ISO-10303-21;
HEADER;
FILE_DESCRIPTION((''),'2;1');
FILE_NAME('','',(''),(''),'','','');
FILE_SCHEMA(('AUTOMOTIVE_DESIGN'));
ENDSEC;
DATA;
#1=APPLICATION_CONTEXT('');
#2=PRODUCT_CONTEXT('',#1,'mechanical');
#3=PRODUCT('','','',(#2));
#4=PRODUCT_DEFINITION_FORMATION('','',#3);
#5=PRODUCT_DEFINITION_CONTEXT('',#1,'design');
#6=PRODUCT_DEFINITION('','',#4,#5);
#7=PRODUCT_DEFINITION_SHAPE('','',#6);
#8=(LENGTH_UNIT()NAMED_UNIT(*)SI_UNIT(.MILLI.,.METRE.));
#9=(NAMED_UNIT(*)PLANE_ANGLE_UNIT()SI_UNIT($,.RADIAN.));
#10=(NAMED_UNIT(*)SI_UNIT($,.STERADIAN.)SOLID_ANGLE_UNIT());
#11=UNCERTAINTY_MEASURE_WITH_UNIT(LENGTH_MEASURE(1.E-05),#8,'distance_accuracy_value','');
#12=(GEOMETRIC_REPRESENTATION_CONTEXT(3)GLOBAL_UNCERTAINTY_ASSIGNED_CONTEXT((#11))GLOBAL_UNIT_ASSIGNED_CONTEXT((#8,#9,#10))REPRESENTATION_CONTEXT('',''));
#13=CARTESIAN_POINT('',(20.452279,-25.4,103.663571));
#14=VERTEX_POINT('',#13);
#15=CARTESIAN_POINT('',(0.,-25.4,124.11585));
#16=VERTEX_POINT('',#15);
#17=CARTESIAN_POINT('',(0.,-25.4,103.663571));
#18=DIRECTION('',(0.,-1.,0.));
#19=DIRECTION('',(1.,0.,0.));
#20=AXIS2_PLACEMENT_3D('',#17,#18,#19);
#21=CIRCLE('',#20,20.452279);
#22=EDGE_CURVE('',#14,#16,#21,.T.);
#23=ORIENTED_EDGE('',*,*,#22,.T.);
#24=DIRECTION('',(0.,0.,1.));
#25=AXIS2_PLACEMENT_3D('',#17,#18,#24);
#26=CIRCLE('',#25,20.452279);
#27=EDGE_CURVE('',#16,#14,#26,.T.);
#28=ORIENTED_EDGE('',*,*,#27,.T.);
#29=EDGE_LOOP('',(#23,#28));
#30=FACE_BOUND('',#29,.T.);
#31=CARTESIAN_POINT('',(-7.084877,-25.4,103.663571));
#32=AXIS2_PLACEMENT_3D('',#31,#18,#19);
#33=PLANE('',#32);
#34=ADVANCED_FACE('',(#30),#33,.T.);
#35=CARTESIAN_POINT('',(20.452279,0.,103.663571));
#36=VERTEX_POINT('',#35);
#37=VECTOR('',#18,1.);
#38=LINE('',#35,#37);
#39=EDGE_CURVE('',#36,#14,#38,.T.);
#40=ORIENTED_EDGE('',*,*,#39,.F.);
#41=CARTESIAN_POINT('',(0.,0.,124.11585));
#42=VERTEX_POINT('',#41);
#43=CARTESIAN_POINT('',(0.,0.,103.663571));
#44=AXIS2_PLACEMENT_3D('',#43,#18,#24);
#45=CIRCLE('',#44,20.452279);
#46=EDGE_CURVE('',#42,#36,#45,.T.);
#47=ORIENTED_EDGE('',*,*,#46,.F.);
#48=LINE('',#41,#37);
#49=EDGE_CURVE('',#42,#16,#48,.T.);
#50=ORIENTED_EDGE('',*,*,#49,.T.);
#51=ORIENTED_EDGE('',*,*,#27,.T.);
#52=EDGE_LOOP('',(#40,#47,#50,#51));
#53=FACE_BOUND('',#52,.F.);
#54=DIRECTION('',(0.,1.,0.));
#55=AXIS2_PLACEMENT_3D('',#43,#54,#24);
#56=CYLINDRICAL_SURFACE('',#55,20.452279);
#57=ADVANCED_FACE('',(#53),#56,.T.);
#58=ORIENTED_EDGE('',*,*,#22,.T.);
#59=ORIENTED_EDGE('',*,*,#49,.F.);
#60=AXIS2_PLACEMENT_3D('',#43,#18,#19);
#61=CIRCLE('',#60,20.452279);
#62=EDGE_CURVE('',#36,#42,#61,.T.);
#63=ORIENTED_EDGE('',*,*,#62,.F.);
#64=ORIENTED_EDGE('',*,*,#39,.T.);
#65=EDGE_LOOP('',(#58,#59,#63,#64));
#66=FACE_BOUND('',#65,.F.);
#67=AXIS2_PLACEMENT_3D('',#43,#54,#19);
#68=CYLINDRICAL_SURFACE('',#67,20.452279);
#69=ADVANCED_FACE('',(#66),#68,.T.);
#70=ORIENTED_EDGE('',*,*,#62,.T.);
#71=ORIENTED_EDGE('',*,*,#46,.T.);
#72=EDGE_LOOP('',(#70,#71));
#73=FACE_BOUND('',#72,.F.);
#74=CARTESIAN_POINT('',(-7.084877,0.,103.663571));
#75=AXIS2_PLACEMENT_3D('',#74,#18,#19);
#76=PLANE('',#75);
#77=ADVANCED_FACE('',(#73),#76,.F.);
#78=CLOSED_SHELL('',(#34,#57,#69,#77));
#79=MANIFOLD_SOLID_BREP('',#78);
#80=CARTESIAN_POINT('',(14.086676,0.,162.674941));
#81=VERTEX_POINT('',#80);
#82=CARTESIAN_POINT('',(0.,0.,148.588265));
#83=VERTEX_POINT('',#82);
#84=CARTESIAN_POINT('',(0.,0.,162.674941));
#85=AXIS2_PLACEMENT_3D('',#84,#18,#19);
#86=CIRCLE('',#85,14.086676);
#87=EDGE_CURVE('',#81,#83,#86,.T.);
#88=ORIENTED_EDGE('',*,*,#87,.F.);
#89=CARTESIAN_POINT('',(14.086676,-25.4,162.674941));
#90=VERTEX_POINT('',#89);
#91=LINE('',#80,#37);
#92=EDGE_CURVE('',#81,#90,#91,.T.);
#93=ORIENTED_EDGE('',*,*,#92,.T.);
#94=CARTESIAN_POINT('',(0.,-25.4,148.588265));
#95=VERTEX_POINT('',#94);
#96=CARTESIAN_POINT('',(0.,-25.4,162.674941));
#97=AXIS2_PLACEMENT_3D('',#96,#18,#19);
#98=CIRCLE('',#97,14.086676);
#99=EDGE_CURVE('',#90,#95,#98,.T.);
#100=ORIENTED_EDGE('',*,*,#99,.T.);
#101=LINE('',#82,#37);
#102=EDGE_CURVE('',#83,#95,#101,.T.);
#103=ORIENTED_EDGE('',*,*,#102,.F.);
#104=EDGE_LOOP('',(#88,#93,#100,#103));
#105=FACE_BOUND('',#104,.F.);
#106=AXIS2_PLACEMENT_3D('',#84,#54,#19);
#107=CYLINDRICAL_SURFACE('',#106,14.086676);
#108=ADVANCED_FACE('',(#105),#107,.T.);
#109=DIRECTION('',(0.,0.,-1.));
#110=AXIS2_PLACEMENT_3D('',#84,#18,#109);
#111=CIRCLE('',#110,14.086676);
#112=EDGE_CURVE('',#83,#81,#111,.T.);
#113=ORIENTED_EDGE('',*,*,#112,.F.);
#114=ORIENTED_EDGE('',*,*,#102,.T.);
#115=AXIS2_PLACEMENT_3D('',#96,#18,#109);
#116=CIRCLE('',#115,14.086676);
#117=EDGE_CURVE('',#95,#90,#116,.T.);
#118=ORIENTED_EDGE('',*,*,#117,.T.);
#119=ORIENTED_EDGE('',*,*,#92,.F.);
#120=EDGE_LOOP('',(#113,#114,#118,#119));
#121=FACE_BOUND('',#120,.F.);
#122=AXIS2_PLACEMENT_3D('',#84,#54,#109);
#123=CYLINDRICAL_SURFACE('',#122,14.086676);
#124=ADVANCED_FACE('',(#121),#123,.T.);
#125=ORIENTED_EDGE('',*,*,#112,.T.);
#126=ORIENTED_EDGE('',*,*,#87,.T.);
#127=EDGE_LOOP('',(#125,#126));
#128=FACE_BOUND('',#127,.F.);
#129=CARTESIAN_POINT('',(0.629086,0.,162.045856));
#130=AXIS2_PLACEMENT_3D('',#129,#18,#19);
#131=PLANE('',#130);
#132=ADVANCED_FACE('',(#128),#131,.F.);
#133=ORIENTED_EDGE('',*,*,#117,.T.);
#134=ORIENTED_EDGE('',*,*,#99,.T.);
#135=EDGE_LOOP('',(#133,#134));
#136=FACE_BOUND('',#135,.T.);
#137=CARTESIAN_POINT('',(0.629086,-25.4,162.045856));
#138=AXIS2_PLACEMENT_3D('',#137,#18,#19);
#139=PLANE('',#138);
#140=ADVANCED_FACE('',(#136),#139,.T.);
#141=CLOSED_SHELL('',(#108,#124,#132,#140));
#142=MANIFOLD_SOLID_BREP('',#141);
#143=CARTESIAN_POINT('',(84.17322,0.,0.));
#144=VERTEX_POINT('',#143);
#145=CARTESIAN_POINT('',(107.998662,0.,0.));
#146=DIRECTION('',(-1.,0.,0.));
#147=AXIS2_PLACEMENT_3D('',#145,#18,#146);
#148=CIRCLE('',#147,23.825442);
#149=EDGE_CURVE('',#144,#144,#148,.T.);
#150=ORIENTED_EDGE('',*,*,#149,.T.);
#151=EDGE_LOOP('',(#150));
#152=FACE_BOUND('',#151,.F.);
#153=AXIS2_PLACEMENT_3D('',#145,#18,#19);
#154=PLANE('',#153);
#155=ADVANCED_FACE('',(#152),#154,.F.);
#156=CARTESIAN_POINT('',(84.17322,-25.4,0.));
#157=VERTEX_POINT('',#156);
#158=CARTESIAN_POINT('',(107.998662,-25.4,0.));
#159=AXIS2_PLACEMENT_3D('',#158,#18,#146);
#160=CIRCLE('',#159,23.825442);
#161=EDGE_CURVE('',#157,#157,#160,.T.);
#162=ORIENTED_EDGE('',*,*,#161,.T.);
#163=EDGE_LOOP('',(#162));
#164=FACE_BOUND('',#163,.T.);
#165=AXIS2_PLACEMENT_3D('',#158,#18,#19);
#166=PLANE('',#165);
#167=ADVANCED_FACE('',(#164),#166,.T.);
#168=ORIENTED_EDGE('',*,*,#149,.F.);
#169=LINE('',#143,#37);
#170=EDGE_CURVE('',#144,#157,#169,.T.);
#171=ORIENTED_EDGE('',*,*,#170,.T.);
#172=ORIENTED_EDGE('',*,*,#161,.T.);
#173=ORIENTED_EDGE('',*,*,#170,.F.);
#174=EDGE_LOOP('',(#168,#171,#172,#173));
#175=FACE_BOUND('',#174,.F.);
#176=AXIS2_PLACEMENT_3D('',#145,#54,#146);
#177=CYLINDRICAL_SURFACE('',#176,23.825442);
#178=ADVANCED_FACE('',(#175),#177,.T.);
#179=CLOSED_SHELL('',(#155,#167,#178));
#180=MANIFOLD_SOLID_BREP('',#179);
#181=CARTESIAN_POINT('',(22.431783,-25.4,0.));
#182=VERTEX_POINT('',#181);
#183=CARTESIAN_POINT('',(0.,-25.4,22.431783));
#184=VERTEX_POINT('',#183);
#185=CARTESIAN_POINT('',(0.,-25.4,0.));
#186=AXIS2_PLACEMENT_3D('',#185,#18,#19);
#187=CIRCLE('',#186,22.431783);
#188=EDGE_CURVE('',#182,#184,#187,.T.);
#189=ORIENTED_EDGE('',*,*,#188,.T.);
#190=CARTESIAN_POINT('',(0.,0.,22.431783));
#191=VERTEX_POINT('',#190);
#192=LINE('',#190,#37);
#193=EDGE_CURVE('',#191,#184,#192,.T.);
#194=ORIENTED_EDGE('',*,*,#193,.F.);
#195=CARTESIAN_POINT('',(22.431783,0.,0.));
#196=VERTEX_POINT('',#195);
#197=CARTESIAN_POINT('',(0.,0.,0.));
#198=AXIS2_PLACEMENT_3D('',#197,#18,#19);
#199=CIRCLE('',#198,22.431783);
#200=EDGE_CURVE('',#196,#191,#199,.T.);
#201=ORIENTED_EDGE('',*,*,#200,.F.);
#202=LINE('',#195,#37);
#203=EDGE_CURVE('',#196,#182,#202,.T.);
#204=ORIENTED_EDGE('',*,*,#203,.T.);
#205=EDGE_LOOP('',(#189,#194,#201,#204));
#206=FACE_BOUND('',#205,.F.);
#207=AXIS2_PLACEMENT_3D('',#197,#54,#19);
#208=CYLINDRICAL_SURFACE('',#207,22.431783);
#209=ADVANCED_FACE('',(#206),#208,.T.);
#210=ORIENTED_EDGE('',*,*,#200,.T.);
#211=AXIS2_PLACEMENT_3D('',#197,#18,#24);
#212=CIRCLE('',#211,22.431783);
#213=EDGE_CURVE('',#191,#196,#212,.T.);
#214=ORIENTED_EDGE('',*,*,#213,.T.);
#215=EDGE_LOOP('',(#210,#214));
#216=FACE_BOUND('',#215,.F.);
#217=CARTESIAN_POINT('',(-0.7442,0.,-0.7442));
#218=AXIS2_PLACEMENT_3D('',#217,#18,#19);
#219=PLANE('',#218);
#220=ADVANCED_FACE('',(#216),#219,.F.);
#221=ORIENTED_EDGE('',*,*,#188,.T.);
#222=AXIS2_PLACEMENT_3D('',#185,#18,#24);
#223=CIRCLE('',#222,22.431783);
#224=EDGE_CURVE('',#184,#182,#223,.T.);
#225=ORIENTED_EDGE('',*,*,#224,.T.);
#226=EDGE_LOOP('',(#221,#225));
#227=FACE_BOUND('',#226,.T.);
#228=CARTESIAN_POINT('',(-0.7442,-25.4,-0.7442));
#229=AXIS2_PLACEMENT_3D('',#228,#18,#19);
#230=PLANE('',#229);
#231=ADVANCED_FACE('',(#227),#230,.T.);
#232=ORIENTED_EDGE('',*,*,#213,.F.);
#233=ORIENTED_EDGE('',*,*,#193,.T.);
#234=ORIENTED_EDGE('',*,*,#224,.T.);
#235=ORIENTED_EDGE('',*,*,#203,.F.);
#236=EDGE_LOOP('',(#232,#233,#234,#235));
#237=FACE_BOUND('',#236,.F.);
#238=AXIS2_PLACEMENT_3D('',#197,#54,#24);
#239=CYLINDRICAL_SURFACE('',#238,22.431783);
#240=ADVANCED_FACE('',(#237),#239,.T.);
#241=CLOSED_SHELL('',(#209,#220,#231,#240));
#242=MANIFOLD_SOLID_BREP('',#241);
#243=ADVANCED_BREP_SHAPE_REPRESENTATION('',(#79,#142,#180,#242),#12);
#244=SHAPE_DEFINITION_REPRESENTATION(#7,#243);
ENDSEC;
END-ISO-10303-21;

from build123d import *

# Parameters (mm, degrees)
F3_DEPTH = 25.4


# Not quite as in the source:
# - the program builds the solid bodies; features that only make, move or delete a surface that nothing else refers to are left out


with BuildPart() as f3:
    # F0 (on Front) → F3 (new body)
    with BuildSketch(Plane.XZ):
        with BuildLine():
            Line((22.4317827104, 0), (0, 0))
            Line((0, 0), (0, 22.4317827104))
            ThreePointArc((0, 22.4317827104), (-15.8616656686, -15.8616656686), (22.4317827104, 0))
        make_face()
        with BuildLine():
            Line((0, 22.4317827104), (0, 0))
            Line((0, 0), (22.4317827104, 0))
            ThreePointArc((22.4317827104, 0), (15.8616656686, 15.8616656686), (0, 22.4317827104))
        make_face()
    extrude(amount=F3_DEPTH)


with BuildPart() as f3b:
    # F0 (on Front) → F3, piece 2 (new body)
    with BuildSketch(Plane.XZ):
        with BuildLine():
            ThreePointArc((14.0866758828, 162.6749411225), (-9.9607840411, 172.6357251636), (0, 148.5882652397))
            ThreePointArc((0, 148.5882652397), (9.9607840411, 152.7141570814), (14.0866758828, 162.6749411225))
        make_face()
    extrude(amount=F3_DEPTH)


with BuildPart() as f3c:
    # F0 (on Front) → F3, piece 3 (new body)
    with BuildSketch(Plane.XZ):
        with BuildLine():
            ThreePointArc((0, 124.1158500545), (-20.4522788755, 103.6635711789), (0, 83.2112923034))
            Line((0, 83.2112923034), (0, 124.1158500545))
        make_face()
        with BuildLine():
            Line((0, 124.1158500545), (0, 83.2112923034))
            ThreePointArc((0, 83.2112923034), (14.4619450836, 89.2016260953), (20.4522788755, 103.6635711789))
            ThreePointArc((20.4522788755, 103.6635711789), (14.4619450836, 118.1255162625), (0, 124.1158500545))
        make_face()
    extrude(amount=F3_DEPTH)


with BuildPart() as f3d:
    # F0 (on Front) → F3, piece 4 (new body)
    with BuildSketch(Plane.XZ):
        with BuildLine():
            ThreePointArc((131.8241035994, 0), (107.9986616969, 23.8254419025), (84.1732197944, 0))
            ThreePointArc((84.1732197944, 0), (107.9986616969, -23.8254419025), (131.8241035994, 0))
        make_face()
    extrude(amount=F3_DEPTH)


solid = Compound([f3.part, f3b.part, f3c.part, f3d.part])
